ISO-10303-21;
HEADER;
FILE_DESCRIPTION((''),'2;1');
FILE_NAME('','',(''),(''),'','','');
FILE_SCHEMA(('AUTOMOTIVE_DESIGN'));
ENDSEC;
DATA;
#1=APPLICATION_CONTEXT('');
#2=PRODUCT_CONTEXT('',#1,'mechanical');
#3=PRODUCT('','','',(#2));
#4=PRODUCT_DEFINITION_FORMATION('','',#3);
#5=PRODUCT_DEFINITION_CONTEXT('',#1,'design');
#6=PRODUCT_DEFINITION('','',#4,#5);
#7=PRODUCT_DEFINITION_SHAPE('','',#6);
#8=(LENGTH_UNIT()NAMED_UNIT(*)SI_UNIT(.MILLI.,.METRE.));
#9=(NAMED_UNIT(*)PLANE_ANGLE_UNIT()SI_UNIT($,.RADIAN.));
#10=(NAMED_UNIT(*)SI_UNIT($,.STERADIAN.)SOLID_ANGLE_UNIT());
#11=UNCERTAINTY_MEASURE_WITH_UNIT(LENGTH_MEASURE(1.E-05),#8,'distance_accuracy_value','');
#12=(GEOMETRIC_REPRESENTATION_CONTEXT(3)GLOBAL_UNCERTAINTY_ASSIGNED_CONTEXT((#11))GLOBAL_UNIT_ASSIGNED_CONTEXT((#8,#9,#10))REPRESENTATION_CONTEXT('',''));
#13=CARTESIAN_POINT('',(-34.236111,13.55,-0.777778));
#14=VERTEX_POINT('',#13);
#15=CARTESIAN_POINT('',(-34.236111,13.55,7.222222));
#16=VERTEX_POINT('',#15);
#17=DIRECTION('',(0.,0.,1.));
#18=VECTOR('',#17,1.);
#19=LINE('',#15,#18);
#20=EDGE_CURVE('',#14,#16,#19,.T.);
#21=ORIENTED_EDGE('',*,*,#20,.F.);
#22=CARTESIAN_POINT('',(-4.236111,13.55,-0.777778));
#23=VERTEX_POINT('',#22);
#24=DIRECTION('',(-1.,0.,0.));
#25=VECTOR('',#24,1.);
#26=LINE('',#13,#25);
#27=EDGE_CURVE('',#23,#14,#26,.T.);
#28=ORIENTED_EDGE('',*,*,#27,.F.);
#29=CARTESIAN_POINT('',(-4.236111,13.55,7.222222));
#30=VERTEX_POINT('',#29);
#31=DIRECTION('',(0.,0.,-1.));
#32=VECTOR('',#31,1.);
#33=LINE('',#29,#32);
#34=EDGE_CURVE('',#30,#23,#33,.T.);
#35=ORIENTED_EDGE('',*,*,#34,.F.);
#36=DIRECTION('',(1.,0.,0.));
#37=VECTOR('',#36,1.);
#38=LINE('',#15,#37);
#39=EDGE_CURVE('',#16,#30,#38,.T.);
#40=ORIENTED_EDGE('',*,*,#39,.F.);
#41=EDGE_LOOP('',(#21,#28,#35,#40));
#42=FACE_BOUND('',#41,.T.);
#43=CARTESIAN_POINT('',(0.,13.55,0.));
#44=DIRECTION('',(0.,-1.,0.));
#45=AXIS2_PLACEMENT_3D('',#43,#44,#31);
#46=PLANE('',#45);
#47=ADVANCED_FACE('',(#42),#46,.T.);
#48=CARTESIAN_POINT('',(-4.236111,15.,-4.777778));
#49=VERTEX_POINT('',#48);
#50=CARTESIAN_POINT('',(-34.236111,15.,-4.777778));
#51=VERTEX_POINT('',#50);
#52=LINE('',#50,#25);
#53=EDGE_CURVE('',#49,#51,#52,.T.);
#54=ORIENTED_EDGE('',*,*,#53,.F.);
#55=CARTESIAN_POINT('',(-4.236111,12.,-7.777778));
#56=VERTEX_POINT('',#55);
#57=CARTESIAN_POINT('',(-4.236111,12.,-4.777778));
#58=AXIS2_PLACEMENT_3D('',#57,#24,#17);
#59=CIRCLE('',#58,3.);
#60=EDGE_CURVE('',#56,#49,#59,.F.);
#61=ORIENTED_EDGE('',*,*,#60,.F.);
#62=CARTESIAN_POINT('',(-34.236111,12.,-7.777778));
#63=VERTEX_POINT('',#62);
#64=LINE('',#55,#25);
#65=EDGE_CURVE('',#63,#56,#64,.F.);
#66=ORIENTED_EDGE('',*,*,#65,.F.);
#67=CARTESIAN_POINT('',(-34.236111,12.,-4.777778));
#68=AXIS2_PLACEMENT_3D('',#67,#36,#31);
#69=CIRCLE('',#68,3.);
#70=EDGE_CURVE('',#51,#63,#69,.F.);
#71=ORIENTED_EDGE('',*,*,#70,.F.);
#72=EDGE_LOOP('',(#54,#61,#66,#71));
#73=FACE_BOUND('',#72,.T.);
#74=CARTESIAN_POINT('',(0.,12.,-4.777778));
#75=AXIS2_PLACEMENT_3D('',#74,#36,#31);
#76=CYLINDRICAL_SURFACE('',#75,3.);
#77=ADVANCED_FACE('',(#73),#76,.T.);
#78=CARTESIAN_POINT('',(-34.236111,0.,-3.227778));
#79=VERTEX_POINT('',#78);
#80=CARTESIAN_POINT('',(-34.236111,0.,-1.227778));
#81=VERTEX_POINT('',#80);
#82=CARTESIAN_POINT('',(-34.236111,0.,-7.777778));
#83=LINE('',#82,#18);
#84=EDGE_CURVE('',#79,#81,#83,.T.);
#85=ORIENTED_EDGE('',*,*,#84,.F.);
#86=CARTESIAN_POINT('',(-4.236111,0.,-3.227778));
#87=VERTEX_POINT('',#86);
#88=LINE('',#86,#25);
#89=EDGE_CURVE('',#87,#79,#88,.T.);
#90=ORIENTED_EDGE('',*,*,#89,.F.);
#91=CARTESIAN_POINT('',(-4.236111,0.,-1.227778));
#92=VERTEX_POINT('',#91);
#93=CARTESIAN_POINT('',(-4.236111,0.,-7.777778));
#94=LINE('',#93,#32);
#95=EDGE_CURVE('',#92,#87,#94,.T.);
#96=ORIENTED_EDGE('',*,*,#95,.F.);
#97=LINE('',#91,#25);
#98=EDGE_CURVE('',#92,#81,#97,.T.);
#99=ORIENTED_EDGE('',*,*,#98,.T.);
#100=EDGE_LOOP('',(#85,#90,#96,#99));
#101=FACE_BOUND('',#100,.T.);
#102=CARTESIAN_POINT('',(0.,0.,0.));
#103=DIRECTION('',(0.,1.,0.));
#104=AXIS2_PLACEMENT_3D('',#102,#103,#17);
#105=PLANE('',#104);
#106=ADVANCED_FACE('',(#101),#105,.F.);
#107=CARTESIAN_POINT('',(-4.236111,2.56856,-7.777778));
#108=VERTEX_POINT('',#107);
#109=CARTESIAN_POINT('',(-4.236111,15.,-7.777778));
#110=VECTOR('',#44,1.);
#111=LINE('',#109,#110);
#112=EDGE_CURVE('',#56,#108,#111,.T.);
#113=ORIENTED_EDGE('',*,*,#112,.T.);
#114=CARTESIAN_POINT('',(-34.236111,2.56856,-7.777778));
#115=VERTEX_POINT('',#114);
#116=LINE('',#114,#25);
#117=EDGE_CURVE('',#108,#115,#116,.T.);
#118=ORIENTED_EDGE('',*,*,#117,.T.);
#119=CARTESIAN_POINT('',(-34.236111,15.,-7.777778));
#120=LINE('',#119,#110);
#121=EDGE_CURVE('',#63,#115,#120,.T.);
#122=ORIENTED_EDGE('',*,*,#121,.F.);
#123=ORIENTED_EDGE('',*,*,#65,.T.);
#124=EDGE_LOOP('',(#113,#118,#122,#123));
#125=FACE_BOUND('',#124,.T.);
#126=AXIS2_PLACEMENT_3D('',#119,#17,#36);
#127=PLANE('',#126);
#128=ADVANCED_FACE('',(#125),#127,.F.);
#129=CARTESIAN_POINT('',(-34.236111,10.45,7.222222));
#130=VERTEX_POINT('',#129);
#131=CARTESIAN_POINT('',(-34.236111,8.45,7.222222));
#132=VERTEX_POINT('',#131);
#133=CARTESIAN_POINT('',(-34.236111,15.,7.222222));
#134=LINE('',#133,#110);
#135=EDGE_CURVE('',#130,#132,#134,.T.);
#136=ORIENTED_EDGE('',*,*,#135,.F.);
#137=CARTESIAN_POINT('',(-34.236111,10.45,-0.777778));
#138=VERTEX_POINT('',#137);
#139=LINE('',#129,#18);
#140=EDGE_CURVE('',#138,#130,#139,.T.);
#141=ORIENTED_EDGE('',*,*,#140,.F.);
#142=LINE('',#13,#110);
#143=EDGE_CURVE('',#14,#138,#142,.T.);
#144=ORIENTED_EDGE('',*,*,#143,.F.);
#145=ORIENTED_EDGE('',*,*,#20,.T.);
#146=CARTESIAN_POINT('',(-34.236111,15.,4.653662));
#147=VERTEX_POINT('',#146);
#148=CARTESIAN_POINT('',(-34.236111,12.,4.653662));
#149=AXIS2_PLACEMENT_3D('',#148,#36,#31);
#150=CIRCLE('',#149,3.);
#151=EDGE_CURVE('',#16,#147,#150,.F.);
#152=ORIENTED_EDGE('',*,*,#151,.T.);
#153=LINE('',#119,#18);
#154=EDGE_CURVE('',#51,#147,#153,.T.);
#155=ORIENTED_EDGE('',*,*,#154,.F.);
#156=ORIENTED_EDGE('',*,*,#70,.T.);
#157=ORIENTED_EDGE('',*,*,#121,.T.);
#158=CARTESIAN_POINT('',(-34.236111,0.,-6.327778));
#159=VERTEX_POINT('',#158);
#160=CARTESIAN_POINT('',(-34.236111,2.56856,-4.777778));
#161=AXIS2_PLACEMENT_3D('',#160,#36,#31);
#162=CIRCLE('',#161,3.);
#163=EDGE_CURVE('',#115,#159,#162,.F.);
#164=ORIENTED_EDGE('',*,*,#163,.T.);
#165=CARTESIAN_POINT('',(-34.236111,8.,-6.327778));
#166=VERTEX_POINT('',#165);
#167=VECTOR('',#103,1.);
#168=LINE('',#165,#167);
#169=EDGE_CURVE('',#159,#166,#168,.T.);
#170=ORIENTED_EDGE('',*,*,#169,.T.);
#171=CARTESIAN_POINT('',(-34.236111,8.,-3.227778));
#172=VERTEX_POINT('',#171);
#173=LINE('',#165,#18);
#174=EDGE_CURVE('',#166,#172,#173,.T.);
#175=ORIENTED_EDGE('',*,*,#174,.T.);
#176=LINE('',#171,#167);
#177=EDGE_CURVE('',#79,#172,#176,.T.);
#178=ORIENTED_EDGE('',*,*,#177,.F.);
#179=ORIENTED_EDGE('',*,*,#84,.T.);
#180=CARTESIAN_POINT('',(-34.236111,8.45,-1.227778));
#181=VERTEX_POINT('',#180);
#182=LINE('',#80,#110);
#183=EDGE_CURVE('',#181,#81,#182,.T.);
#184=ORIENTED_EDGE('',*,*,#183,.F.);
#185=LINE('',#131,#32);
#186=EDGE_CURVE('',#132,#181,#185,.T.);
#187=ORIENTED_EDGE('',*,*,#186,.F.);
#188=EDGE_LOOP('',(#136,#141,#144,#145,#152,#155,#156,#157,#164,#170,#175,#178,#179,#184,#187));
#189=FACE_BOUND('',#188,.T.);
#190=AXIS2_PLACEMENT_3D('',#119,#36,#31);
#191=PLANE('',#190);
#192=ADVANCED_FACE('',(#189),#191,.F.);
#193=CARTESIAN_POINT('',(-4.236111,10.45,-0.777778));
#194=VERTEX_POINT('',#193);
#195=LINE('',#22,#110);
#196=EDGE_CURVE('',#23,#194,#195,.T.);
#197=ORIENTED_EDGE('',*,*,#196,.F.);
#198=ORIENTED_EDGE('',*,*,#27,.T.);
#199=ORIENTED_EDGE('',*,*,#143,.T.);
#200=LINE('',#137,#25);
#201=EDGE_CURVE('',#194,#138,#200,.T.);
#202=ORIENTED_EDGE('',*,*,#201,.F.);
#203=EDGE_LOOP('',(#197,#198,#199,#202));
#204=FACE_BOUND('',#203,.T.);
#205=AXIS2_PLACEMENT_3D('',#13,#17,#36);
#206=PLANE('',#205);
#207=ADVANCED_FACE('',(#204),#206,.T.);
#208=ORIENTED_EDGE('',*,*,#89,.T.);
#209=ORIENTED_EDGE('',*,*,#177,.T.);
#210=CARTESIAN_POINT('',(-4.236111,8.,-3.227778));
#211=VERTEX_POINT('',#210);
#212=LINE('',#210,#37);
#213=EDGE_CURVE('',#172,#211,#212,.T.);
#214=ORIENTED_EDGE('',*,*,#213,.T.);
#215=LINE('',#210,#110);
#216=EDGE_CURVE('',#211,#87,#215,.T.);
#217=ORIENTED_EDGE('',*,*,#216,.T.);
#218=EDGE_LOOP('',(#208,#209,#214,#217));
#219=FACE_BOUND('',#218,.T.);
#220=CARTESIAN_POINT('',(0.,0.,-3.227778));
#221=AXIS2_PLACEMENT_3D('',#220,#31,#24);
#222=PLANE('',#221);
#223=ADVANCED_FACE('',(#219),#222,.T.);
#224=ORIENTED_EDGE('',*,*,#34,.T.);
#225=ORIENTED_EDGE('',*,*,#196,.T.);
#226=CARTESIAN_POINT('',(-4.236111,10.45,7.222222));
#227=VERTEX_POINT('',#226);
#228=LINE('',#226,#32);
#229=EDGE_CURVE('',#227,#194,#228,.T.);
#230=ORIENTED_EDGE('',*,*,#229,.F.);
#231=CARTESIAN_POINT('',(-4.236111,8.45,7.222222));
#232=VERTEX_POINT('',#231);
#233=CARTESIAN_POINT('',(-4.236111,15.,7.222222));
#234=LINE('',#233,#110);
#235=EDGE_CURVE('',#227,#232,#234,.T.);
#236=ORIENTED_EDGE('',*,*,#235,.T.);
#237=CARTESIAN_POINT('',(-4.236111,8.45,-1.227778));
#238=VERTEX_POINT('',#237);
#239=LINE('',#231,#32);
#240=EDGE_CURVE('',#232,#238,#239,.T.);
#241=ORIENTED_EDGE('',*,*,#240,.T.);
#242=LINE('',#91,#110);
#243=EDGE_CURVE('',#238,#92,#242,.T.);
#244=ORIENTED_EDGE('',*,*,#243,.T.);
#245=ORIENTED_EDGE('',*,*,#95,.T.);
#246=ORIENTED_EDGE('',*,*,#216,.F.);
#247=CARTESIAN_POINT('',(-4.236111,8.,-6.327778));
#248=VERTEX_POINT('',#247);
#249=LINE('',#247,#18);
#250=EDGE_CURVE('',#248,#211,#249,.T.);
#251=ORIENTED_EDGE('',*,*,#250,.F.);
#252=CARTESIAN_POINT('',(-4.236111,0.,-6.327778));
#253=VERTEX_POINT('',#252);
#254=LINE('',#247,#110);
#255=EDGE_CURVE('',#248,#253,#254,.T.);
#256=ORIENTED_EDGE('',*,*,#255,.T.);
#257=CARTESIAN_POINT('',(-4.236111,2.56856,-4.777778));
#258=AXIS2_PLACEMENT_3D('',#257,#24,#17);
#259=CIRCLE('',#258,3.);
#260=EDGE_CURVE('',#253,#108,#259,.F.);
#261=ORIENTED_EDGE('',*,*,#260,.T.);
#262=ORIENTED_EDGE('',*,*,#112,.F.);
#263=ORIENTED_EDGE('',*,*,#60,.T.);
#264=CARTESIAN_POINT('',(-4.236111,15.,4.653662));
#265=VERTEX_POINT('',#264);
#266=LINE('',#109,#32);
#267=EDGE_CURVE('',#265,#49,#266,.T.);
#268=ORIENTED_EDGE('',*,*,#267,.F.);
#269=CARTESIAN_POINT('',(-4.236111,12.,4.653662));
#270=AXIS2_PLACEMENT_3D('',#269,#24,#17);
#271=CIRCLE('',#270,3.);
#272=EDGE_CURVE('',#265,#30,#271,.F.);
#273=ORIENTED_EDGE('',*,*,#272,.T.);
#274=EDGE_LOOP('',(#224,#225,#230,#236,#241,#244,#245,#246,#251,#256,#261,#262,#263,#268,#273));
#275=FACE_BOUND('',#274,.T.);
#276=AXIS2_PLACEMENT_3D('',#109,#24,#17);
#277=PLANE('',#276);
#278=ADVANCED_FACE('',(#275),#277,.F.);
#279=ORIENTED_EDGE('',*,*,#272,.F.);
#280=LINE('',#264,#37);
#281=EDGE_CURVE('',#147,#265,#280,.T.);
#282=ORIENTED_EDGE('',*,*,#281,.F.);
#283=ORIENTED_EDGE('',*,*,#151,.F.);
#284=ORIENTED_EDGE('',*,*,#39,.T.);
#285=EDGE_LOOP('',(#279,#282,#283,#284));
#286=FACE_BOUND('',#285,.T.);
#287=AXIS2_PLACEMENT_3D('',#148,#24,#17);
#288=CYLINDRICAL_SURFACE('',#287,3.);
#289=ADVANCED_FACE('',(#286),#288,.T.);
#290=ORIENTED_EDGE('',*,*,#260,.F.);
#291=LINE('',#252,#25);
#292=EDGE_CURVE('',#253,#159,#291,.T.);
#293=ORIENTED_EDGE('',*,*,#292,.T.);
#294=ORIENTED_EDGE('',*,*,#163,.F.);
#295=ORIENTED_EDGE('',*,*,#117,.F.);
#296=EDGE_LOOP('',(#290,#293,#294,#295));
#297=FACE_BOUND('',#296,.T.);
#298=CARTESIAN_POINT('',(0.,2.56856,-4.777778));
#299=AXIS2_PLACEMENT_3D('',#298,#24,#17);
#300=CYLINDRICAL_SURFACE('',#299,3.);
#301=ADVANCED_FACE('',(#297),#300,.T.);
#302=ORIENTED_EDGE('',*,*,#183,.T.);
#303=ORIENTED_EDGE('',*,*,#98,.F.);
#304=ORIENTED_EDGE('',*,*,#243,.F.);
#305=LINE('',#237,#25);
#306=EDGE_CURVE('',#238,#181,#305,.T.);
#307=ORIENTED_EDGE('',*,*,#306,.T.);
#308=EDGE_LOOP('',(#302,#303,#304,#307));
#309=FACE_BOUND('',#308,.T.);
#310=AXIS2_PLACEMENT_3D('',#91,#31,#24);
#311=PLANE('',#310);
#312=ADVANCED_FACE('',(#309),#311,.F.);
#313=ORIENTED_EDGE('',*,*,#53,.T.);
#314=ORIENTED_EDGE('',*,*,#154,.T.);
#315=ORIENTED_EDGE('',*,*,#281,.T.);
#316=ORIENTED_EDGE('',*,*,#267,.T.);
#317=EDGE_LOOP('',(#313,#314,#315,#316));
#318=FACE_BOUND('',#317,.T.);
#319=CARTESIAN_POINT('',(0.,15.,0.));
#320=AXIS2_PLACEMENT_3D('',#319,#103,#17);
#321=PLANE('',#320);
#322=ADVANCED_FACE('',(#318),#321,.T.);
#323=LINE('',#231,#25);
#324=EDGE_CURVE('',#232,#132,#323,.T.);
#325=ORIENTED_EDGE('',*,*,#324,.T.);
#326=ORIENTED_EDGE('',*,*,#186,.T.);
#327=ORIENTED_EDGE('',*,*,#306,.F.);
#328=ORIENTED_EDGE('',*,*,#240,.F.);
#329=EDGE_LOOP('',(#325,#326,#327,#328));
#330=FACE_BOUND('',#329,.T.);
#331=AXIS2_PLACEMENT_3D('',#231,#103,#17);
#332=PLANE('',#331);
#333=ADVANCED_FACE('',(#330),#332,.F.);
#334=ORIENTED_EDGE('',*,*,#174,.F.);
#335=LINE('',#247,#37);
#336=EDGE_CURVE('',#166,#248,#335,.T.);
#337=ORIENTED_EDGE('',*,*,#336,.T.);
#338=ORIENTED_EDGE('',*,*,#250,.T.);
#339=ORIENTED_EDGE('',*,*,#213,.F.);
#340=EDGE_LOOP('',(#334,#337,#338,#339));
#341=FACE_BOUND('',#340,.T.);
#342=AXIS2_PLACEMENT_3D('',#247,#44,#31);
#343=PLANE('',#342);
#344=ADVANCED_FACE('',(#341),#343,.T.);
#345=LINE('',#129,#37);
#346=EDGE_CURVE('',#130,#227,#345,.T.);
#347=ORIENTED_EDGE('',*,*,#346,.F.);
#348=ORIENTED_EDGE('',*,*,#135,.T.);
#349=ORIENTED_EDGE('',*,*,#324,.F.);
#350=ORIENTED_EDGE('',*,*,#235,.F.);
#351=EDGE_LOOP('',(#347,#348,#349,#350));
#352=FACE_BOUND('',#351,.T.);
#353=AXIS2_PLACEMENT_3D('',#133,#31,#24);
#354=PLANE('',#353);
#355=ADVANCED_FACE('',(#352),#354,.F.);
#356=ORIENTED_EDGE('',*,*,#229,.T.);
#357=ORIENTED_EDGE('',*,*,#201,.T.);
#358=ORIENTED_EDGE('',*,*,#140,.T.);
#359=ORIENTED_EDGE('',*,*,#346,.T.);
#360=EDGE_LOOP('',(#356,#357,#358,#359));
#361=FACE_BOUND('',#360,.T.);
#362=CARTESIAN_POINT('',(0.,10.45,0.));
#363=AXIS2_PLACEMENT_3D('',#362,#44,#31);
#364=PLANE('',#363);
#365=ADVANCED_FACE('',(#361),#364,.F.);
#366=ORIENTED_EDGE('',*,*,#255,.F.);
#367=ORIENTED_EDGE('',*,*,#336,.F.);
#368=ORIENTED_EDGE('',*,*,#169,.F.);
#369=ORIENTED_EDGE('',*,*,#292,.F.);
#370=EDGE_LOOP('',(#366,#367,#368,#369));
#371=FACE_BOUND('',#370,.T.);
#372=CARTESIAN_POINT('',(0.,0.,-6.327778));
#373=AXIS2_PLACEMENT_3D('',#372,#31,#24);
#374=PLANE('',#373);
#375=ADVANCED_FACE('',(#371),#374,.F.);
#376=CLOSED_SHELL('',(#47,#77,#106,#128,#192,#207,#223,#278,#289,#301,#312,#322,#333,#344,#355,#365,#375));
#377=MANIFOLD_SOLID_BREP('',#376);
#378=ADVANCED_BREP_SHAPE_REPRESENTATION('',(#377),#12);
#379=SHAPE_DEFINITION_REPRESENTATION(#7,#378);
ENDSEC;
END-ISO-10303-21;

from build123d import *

# Parameters (mm, degrees)
SKETCH1_W               = 30
SKETCH1_H               = 15
BOSS_EXTRUDE1_DEPTH     = 15
CUT_EXTRUDE1_DEPTH      = 1.55
CUT_EXTRUDE1_DEPTH_BACK = 1.55
SKETCH2_W               = 30
SKETCH2_H               = 8
CUT_EXTRUDE2_DEPTH      = 1.55
CUT_EXTRUDE2_DEPTH_BACK = 1.55
SKETCH4_W               = 30
SKETCH4_H               = 8
SKETCH5_W               = 8.45
SKETCH5_H               = 8.45
CUT_EXTRUDE3_DEPTH      = 35.431000961
FILLET1_R               = 3


with BuildPart() as part:
    # Sketch1 → Boss-Extrude1 (new body)
    with BuildSketch(Plane(origin=(0, 0, 0), x_dir=(1, 0, 0), z_dir=(0, 1, 0))):
        with Locations((-19.236111111, 0.277777778)):
            Rectangle(SKETCH1_W, SKETCH1_H)
    extrude(amount=BOSS_EXTRUDE1_DEPTH)

    # Sketch2 → Cut-Extrude1 (cut, two sides: drawn at the far end of the back side and taken through both)
    with BuildSketch(Plane(origin=(0, 0, -4.777777778), x_dir=(-1, 0, 0), z_dir=(0, 0, -1)).offset(-CUT_EXTRUDE1_DEPTH_BACK)):
        with Locations((19.236111111, 4)):
            Rectangle(SKETCH2_W, SKETCH2_H)
    extrude(amount=CUT_EXTRUDE1_DEPTH + CUT_EXTRUDE1_DEPTH_BACK, mode=Mode.SUBTRACT)

    # Sketch4 → Cut-Extrude2 (cut, two sides: drawn at the far end of the back side and taken through both)
    with BuildSketch(Plane(origin=(0, 12, 0), x_dir=(1, 0, 0), z_dir=(0, 1, 0)).offset(-CUT_EXTRUDE2_DEPTH_BACK)):
        with Locations((-19.236111111, -3.222222222)):
            Rectangle(SKETCH4_W, SKETCH4_H)
    extrude(amount=CUT_EXTRUDE2_DEPTH + CUT_EXTRUDE2_DEPTH_BACK, mode=Mode.SUBTRACT)

    # Sketch5 → Cut-Extrude3 (cut, through all)
    with BuildSketch(Plane.ZY.offset(34.236111111)):
        with Locations((2.997222222, 4.225)):
            Rectangle(SKETCH5_W, SKETCH5_H)
    extrude(amount=-CUT_EXTRUDE3_DEPTH, mode=Mode.SUBTRACT)

    # Fillet1
    # the kernel refuses this fillet: 3 mm, written as the material it takes off along each edge
    with BuildSketch(Plane(origin=(2.185288658, 15, 7.222222222), x_dir=(0, 0, -1), z_dir=(-1, 0, 0)), Plane(origin=(-40.657510881, 0, -7.777777778), x_dir=(0, 1, 0), z_dir=(1, 0, 0))) as fillet1_piece_1:
        with BuildLine():
            CenterArc((2.568559908, 3), FILLET1_R, 211.108922511, 58.891077489)
            Line((0, 1.45), (-0.051371198, 1.419))
            ThreePointArc((-0.051371198, 1.419), (-0.06, 0.725), (-0.06, 0))
            Line((-0.06, 0), (0, -0.06))
            Line((0, -0.06), (2.568559908, -0.06))
            Line((2.568559908, -0.06), (2.568559908, 0))
        make_face()
    extrude(amount=42.842799539, mode=Mode.SUBTRACT)
    with BuildSketch(Plane(origin=(-41.736111111, 15, -7.777777778), x_dir=(0, -1, 0), z_dir=(1, 0, 0))) as fillet1_piece_2:
        with BuildLine():
            CenterArc((FILLET1_R, -FILLET1_R), FILLET1_R, 90, 90)
            Line((0, -FILLET1_R), (-FILLET1_R * 0.02, -FILLET1_R))
            Line((-FILLET1_R * 0.02, -FILLET1_R), (-FILLET1_R * 0.02, FILLET1_R * 0.02))
            Line((-FILLET1_R * 0.02, FILLET1_R * 0.02), (FILLET1_R, FILLET1_R * 0.02))
            Line((FILLET1_R, FILLET1_R * 0.02), (FILLET1_R, 0))
        make_face()
    extrude(amount=45, mode=Mode.SUBTRACT)


solid = part.part
